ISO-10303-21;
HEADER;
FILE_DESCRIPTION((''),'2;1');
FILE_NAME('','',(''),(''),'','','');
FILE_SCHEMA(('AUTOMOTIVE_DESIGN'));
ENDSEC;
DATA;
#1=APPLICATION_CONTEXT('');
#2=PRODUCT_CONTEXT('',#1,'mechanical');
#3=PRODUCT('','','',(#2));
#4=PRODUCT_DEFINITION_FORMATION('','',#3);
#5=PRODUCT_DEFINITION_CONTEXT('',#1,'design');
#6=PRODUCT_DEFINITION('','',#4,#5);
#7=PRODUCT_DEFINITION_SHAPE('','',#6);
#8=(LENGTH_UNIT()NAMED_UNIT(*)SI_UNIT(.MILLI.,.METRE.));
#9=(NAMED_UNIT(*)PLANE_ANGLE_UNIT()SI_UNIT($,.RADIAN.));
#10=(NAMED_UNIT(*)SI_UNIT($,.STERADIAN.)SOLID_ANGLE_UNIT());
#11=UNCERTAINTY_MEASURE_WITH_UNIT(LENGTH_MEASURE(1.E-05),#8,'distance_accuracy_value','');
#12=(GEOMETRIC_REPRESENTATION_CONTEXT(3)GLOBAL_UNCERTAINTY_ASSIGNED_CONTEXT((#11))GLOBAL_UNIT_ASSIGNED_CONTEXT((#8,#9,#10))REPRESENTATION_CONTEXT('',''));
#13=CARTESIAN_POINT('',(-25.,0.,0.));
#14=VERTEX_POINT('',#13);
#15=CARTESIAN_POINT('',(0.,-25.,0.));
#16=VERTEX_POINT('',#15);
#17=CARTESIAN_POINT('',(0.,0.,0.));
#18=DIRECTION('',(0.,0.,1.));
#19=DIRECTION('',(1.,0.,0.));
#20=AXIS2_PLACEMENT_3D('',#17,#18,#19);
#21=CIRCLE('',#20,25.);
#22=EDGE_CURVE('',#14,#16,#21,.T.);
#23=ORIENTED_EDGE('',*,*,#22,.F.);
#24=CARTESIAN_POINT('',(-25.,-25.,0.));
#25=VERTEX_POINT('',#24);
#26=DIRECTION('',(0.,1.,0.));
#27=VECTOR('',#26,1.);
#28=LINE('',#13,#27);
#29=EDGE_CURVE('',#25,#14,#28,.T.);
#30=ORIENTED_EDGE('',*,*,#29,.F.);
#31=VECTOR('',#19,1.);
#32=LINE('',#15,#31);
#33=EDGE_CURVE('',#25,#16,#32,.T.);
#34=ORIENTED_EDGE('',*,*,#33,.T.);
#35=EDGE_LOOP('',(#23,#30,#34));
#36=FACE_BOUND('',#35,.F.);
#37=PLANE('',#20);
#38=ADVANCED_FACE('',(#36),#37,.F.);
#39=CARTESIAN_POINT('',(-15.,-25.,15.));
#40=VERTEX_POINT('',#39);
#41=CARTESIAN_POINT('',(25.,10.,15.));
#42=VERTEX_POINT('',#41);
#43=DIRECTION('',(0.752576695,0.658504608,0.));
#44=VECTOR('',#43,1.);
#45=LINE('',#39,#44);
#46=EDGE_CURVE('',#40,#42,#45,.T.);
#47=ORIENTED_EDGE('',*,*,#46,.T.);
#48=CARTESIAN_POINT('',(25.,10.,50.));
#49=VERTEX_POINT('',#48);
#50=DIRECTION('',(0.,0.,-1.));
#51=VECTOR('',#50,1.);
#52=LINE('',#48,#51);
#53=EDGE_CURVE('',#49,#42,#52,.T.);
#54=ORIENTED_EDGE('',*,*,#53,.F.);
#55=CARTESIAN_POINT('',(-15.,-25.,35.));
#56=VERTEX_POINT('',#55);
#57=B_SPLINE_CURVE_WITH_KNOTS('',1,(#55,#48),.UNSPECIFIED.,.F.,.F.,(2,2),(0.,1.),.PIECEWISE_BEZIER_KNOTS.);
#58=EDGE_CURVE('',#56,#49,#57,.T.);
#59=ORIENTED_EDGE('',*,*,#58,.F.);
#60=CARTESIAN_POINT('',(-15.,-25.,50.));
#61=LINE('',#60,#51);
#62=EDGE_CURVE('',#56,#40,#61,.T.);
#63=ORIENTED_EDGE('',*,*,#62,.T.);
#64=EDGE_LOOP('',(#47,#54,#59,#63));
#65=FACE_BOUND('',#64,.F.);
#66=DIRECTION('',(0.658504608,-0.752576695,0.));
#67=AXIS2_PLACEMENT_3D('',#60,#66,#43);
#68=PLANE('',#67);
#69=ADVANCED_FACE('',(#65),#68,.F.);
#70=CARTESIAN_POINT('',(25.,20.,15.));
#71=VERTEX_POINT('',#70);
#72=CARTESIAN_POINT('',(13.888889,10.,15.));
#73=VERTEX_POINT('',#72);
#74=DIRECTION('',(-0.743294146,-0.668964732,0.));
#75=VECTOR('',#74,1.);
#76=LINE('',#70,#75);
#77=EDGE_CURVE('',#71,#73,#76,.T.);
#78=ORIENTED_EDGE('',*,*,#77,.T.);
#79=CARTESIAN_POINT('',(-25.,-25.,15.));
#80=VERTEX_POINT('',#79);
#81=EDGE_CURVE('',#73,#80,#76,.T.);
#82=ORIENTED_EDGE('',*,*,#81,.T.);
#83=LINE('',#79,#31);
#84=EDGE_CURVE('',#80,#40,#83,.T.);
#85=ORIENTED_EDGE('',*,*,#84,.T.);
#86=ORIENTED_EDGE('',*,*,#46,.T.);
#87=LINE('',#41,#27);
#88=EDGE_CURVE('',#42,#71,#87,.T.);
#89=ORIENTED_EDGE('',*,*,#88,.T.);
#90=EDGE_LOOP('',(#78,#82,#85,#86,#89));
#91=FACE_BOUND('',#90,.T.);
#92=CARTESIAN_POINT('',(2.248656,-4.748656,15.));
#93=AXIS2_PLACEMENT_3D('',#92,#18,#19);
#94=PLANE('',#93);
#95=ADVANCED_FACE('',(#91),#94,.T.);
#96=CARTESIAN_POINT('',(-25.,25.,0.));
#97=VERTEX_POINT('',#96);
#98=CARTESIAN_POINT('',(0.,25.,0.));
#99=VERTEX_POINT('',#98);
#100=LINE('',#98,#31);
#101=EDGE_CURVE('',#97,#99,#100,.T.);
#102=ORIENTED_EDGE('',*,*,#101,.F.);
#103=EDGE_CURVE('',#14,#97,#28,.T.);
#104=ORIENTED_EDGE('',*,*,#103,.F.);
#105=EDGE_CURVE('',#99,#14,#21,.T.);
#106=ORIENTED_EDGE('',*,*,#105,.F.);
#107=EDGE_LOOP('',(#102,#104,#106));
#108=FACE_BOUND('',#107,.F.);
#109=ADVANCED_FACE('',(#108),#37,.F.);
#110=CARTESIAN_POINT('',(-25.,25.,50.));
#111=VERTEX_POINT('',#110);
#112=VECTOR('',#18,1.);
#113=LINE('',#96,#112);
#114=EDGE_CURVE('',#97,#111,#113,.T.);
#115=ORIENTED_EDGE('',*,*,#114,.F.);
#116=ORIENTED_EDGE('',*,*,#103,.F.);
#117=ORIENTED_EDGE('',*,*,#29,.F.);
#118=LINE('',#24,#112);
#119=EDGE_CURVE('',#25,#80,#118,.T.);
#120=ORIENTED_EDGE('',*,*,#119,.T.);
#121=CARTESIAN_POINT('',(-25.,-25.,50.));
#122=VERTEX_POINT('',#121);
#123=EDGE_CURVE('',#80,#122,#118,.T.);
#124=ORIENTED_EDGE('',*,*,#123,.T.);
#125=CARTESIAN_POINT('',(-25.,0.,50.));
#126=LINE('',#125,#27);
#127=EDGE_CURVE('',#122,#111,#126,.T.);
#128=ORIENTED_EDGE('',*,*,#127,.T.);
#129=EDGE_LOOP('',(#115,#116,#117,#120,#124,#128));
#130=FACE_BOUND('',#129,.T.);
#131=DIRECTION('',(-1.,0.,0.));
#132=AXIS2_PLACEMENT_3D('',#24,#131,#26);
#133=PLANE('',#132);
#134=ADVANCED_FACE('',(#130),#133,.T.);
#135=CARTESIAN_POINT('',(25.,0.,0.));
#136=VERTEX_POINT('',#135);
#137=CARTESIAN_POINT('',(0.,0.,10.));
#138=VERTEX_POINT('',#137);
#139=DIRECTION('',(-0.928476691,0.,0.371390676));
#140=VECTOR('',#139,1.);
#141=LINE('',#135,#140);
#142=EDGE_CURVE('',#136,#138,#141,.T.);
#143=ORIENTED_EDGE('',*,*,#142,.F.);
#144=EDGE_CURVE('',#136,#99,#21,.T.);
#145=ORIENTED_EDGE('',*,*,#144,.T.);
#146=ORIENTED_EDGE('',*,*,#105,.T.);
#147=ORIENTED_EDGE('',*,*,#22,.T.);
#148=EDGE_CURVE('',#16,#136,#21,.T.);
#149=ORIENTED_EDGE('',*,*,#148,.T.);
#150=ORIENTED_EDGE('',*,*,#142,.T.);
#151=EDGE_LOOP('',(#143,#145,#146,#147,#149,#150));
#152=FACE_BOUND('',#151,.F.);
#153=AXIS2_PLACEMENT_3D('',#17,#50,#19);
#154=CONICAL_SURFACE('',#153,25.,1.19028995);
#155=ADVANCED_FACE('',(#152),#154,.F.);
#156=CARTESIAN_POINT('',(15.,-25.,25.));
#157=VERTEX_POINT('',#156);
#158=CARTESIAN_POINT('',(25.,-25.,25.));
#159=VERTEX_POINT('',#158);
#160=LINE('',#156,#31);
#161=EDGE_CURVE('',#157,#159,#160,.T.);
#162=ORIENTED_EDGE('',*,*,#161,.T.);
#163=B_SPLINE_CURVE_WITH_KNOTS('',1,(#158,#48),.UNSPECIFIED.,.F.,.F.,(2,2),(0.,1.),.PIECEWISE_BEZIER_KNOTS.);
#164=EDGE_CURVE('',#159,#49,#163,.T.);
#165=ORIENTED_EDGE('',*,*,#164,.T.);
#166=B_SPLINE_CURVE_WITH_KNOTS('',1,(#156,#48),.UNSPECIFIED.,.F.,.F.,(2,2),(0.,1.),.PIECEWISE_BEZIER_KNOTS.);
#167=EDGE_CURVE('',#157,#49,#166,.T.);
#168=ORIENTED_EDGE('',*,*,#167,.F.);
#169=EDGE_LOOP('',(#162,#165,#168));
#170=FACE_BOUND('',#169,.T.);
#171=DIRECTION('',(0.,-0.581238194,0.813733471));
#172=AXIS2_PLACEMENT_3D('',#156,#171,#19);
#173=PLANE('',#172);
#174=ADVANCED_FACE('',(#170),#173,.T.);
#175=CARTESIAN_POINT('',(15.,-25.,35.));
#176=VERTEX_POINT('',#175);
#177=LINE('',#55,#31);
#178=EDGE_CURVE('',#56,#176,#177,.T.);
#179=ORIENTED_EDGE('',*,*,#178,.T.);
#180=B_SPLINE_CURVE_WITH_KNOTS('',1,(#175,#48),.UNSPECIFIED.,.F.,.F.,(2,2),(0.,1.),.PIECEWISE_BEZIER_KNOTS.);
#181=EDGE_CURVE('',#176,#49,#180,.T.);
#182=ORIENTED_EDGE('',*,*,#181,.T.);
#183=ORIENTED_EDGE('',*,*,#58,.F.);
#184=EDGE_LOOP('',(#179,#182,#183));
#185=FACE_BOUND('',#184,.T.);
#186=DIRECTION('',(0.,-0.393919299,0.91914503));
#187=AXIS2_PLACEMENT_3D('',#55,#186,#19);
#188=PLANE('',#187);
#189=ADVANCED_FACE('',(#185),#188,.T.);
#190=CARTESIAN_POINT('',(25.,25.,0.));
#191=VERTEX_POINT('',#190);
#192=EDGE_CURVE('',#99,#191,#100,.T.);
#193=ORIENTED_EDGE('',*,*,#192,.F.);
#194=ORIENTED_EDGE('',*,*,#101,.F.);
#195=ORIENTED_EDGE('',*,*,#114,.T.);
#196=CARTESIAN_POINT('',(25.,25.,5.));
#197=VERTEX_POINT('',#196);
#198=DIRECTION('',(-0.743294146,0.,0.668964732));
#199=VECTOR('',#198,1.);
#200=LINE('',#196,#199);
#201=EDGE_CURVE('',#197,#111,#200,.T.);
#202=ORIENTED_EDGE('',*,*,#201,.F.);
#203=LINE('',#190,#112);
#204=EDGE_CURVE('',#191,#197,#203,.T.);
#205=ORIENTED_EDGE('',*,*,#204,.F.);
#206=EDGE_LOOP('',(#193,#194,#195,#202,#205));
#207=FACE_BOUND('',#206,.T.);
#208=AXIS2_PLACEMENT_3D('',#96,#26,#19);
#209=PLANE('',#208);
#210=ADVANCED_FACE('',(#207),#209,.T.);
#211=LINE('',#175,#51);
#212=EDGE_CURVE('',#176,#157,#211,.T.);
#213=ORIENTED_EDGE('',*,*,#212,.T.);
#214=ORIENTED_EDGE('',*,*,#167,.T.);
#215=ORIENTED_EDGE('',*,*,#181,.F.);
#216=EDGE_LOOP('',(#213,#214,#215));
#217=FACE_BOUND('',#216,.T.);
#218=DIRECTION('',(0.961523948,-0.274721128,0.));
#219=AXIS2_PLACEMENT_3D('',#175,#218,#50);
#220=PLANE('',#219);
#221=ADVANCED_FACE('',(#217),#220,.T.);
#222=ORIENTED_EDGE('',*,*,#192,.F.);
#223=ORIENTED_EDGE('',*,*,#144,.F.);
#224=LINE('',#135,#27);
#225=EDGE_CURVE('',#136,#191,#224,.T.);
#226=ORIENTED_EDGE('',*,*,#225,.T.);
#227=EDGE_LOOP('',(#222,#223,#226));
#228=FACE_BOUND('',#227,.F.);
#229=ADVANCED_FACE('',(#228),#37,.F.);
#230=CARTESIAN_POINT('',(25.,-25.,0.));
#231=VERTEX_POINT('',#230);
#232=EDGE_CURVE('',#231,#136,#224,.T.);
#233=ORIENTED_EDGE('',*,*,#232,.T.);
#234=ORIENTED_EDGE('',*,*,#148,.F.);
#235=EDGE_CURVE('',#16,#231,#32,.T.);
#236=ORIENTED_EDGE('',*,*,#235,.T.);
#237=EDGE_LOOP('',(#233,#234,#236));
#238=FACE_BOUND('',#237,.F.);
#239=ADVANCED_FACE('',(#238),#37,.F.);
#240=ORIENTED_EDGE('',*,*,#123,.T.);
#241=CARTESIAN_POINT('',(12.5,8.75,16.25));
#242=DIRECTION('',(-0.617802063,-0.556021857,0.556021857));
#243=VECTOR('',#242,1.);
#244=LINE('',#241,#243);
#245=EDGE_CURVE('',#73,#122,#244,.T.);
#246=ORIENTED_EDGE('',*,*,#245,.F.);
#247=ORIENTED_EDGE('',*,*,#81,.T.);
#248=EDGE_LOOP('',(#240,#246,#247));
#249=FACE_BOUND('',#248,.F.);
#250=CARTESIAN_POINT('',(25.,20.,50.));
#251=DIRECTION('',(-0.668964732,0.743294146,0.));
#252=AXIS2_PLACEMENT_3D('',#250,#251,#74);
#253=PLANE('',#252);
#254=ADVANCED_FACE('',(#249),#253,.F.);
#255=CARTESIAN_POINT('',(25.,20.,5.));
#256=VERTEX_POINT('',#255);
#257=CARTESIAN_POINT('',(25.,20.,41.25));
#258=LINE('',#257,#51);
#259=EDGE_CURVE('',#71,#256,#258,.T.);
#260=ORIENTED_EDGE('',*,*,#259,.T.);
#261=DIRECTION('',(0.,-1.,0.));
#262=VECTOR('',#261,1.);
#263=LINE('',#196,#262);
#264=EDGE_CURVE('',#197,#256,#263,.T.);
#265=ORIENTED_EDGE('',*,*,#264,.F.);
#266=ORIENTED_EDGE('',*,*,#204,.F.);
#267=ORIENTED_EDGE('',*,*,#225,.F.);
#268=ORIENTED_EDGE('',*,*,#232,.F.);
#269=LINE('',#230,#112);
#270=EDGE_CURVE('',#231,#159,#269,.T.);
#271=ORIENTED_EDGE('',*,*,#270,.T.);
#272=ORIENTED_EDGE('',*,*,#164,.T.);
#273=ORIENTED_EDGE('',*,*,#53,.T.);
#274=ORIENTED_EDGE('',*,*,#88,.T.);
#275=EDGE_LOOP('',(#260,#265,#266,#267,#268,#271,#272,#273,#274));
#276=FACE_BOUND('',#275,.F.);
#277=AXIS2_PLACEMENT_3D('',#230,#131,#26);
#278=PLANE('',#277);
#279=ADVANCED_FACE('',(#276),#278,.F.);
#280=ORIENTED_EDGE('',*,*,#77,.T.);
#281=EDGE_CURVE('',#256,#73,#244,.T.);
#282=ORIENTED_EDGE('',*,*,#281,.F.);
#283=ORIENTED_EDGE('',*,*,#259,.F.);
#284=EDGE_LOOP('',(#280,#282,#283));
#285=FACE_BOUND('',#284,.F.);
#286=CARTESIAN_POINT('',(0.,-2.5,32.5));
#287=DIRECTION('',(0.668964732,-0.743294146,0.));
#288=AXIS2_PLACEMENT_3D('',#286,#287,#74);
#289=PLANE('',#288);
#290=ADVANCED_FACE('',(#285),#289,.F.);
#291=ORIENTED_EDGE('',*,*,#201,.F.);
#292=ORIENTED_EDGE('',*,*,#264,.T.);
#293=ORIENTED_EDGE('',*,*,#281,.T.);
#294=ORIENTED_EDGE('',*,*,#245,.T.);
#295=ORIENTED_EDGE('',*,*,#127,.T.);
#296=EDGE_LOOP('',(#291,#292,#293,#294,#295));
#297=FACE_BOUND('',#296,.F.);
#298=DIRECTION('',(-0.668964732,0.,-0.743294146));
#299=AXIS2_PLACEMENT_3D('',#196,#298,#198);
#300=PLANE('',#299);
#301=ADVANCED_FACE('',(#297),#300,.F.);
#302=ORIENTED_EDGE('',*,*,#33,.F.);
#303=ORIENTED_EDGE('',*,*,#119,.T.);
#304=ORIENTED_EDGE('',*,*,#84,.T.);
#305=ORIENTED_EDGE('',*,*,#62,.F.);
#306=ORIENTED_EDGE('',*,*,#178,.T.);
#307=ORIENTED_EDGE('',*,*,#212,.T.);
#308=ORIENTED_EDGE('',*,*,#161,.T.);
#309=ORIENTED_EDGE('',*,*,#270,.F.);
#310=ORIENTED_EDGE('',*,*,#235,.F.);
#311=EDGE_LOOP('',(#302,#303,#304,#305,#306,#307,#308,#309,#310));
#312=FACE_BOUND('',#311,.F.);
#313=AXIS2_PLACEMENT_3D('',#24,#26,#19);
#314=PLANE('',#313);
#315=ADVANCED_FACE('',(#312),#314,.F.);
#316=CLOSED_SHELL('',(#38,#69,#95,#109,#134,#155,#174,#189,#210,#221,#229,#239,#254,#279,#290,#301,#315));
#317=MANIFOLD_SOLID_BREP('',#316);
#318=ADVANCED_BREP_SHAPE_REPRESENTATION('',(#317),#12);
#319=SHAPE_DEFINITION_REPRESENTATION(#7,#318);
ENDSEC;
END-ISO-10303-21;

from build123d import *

# Parameters (mm, degrees)
F0_W      = 50
F0_H      = 50
F1_DEPTH  = 50
F4_DEPTH  = 35
F10_REACH = 117.2691203354


with BuildPart() as f1:
    # F0 (on Top) → F1 (new body)
    with BuildSketch(Plane.XY):
        Rectangle(F0_W, F0_H)
    extrude(amount=F1_DEPTH)

    # F3 (on face) → F4 (cut, through all)
    with BuildSketch(Plane.XY.offset(50)):
        Polygon((25, 20), (-25, -25), (-15, -25), (25, 10), align=None)
    extrude(amount=-F4_DEPTH, mode=Mode.SUBTRACT)

    # F5 (on Front) → F6 (revolve, cut)
    with BuildSketch(Plane.XZ):
        Polygon((0, 10), (0, 0), (25, 0), align=None)
    revolve(axis=Axis((0, 0, 5), (0, 0, 1)), mode=Mode.SUBTRACT)

    # F7 (on face) → F8 section 0
    with BuildSketch(Plane.XZ.offset(25), mode=Mode.PRIVATE) as f8_s0:
        Polygon((25, 50), (-15, 50), (-15, 35), (15, 35), (15, 25), (25, 25), align=None)
    loft([f8_s0.sketch, Vertex(25, 10, 50)], mode=Mode.SUBTRACT)

    f10_end = Plane(origin=(0, -2.5, 32.5), x_dir=(-0.7432941462, -0.6689647316, 0), z_dir=(0.6689647316, -0.7432941462, 0))
    # F9 (on face) → F10 (cut, up to a plane its end follows)
    with BuildSketch(Plane(origin=(0, 25, 0), x_dir=(-1, 0, 0), z_dir=(0, 1, 0))):
        Polygon((-25, 5), (25, 50), (-25, 50), align=None)
    f10_long = extrude(amount=-F10_REACH, mode=Mode.PRIVATE)
    add(split(f10_long, bisect_by=f10_end, keep=Keep.BOTTOM, mode=Mode.PRIVATE), mode=Mode.SUBTRACT)


solid = f1.part
